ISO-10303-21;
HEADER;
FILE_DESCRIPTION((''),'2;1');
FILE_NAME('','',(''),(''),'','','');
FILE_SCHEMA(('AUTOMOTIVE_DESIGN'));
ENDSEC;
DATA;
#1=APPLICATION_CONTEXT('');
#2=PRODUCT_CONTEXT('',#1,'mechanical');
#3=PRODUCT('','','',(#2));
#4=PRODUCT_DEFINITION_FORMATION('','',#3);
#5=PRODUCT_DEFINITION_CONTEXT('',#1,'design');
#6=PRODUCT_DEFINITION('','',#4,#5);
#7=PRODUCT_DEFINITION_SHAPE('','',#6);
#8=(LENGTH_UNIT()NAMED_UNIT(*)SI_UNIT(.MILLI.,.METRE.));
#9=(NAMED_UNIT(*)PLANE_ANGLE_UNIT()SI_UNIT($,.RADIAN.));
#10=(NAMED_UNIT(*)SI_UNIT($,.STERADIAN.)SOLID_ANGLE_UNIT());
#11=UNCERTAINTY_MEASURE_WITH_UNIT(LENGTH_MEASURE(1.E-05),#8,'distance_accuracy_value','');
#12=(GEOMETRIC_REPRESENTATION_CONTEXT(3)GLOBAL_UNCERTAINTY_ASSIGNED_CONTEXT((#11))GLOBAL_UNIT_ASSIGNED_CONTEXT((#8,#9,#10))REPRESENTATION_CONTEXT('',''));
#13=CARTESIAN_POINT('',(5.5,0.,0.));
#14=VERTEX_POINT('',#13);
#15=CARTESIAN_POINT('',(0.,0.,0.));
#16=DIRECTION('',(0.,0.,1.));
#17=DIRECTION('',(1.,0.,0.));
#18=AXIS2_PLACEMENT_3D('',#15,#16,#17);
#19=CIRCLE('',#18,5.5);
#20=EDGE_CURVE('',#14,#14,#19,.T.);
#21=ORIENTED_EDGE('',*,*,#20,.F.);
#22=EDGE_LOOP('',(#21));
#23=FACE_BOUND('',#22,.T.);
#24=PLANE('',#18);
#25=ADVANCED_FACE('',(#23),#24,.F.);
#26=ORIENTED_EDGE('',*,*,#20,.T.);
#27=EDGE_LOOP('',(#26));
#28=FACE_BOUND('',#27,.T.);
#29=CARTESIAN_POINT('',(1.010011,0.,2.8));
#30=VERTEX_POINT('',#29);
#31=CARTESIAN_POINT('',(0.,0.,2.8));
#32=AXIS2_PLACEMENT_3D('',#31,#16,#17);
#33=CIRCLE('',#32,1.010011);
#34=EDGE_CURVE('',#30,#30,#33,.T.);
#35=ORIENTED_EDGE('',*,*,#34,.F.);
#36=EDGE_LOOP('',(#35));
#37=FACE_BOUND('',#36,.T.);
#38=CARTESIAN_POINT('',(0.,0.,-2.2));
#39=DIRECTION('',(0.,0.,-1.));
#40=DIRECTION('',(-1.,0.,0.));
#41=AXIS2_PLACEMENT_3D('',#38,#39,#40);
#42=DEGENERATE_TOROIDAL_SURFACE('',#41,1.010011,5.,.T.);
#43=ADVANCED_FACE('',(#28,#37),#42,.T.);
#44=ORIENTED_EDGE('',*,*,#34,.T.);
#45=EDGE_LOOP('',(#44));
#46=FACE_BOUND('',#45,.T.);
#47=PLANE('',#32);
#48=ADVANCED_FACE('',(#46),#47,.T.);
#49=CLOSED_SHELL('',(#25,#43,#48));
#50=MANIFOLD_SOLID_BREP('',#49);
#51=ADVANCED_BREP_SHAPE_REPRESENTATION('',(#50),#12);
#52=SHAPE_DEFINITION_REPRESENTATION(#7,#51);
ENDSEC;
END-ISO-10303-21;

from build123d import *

# Parameters (mm, degrees)
ESQUISSE1_R      = 5.5
EXTRUSION1_DEPTH = 2.8
CONG_1_R         = 5


with BuildPart() as part:
    # Esquisse1 → Extrusion1 (new body)
    with BuildSketch(Plane.XY):
        Circle(ESQUISSE1_R)
    extrude(amount=EXTRUSION1_DEPTH)

    # Congé1
    # the kernel refuses this fillet: 5 mm, written as the material it takes off along each edge
    with BuildSketch(Plane(origin=(0, 0, 2.8), x_dir=(1, 0, 0), z_dir=(0, -1, 0))) as cong_1_piece_1:
        with BuildLine():
            CenterArc((1.010011136, -5), CONG_1_R, 26.103881137, 63.896118863)
            Line((1.010011136, 0), (1.010011136, 0.1))
            Line((1.010011136, 0.1), (5.5, 0.1))
            Line((5.5, 0.1), (5.6, 0))
            ThreePointArc((5.6, 0), (5.6, -1.4), (5.589799777, -2.756))
            Line((5.589799777, -2.756), (5.5, -2.8))
        make_face()
    revolve(axis=Axis((0, 0, 2.8), (0, 0, 1)), mode=Mode.SUBTRACT)


solid = part.part
